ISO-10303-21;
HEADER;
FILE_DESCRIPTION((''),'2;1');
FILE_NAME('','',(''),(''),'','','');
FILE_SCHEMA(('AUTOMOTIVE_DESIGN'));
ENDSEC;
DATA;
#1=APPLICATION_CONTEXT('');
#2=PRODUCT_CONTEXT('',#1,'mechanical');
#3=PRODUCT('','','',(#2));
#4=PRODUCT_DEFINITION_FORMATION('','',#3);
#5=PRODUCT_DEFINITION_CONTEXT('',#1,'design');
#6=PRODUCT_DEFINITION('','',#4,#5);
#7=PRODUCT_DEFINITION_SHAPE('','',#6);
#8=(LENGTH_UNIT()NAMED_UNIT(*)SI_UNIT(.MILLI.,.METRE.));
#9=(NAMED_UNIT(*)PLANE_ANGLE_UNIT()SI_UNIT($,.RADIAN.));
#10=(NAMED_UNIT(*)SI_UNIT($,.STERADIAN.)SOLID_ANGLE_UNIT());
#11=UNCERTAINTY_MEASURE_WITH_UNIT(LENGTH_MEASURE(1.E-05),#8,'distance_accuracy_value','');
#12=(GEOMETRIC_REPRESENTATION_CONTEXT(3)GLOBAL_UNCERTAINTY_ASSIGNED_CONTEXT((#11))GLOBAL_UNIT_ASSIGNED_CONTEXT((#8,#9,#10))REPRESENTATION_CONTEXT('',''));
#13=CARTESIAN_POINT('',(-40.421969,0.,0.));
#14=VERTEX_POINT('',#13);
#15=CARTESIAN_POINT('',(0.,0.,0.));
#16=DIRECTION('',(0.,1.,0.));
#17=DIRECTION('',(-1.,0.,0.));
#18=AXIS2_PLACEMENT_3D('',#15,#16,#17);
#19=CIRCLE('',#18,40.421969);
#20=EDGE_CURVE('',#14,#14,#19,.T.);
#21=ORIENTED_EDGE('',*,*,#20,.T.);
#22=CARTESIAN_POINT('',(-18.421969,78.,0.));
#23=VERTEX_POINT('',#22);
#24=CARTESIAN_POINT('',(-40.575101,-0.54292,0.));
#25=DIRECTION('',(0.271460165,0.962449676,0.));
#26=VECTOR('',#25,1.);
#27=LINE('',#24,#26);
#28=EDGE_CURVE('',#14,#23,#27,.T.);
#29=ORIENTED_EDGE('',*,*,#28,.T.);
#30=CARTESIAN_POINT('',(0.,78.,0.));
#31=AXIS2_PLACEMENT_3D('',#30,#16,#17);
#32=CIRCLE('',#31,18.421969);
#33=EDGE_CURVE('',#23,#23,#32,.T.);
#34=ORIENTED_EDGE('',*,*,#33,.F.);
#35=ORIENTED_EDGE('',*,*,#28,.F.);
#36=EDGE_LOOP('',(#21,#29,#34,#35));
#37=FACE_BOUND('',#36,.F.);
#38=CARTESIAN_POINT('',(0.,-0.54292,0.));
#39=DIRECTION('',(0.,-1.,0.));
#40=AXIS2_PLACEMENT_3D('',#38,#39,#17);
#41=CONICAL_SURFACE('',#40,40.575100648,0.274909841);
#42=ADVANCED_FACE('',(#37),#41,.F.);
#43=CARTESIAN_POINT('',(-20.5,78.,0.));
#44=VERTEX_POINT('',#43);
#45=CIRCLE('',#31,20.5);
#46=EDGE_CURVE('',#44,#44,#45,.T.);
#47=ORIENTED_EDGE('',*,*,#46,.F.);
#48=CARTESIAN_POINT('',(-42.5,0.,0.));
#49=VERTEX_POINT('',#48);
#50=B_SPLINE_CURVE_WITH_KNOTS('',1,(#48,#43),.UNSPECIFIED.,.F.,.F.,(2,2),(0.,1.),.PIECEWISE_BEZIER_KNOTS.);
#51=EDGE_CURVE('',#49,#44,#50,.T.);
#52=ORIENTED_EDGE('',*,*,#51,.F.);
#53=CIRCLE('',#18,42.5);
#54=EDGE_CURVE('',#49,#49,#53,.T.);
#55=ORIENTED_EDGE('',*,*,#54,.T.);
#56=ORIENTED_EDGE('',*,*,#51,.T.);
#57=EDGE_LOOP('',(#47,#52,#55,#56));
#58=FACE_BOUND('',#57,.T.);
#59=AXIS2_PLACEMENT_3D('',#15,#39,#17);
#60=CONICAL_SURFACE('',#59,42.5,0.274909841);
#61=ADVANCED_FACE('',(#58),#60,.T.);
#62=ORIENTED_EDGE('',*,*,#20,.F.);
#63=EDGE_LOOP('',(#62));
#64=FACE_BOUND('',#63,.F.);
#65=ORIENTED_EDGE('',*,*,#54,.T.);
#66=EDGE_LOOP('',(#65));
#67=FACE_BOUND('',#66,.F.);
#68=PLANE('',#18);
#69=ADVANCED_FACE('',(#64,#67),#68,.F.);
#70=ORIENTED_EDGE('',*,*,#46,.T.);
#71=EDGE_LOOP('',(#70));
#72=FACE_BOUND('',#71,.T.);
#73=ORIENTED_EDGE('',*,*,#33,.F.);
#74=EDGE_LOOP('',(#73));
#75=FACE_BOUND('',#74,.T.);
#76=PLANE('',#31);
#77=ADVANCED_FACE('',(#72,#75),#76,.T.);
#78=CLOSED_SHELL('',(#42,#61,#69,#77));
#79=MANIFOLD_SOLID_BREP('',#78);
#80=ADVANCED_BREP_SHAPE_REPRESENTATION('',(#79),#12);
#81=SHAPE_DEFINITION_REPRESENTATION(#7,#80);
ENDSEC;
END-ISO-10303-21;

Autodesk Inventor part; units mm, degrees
ref_plane "YZ Plane" through (0, 0, 0) normal (1, 0, 0) x (0, 1, 0)
ref_plane "XY Plane" through (0, 0, 0) normal (0, 0, 1) x (1, 0, 0)
sketch "Szkic6" plane through (0, 0, 0) normal (0, 1, 0) x (-1, 0, 0)
  circle A0 centre (0, 0) radius 42.5
  dimension "d33" = 85
ref_plane "Płaszczyzna konstrukcyjna1" through (0, 78, 0) normal (0, 1, 0) x (-1, 0, 0)
sketch "Szkic7" plane through (0, 78, 0) normal (0, 1, 0) x (-1, 0, 0)
  circle A0 centre (0, 0) radius 20.5
  dimension "d35" = 41
loft "Wyciągnięcie złożone1" add profiles "Szkic6", "Szkic7"
shell "Skorupa1" thickness 2 removed faces 2 at (-3.5154, 78, 4.1371) at (10.6049, 0, 7.3037)
equation "\"d33\" = OD1"
equation "\"d35\" = OD2"
equation "\"d52\" = THK"
equation "\"SzerokośćGięciaPodcięcia\" = Grubość"
equation "\"RozmiarPodcięciaNarożnika\" = 4 * Grubość"
equation "\"PromieńPrzejścia\" = PromieńGięcia"
equation "\"Rozmiar_promienia_Jacobiego\" = PromieńGięcia"
equation "\"Wielk_odstępu\" = Grubość"
equation "\"d2\" = PromieńGięcia"
equation "\"d23\" = PromieńGięcia"
equation "\"OD1\" = 85"
equation "\"OD2\" = 41"
equation "\"L\" = 78"
equation "\"THK\" = 2"
equation "\"d34\" = L"
equation "\"Grubość\" = 1.5"
equation "\"PromieńGięcia\" = 3"
properties part number "Redukcja symetryczna Ø85x41x2 L=78" material "304"
